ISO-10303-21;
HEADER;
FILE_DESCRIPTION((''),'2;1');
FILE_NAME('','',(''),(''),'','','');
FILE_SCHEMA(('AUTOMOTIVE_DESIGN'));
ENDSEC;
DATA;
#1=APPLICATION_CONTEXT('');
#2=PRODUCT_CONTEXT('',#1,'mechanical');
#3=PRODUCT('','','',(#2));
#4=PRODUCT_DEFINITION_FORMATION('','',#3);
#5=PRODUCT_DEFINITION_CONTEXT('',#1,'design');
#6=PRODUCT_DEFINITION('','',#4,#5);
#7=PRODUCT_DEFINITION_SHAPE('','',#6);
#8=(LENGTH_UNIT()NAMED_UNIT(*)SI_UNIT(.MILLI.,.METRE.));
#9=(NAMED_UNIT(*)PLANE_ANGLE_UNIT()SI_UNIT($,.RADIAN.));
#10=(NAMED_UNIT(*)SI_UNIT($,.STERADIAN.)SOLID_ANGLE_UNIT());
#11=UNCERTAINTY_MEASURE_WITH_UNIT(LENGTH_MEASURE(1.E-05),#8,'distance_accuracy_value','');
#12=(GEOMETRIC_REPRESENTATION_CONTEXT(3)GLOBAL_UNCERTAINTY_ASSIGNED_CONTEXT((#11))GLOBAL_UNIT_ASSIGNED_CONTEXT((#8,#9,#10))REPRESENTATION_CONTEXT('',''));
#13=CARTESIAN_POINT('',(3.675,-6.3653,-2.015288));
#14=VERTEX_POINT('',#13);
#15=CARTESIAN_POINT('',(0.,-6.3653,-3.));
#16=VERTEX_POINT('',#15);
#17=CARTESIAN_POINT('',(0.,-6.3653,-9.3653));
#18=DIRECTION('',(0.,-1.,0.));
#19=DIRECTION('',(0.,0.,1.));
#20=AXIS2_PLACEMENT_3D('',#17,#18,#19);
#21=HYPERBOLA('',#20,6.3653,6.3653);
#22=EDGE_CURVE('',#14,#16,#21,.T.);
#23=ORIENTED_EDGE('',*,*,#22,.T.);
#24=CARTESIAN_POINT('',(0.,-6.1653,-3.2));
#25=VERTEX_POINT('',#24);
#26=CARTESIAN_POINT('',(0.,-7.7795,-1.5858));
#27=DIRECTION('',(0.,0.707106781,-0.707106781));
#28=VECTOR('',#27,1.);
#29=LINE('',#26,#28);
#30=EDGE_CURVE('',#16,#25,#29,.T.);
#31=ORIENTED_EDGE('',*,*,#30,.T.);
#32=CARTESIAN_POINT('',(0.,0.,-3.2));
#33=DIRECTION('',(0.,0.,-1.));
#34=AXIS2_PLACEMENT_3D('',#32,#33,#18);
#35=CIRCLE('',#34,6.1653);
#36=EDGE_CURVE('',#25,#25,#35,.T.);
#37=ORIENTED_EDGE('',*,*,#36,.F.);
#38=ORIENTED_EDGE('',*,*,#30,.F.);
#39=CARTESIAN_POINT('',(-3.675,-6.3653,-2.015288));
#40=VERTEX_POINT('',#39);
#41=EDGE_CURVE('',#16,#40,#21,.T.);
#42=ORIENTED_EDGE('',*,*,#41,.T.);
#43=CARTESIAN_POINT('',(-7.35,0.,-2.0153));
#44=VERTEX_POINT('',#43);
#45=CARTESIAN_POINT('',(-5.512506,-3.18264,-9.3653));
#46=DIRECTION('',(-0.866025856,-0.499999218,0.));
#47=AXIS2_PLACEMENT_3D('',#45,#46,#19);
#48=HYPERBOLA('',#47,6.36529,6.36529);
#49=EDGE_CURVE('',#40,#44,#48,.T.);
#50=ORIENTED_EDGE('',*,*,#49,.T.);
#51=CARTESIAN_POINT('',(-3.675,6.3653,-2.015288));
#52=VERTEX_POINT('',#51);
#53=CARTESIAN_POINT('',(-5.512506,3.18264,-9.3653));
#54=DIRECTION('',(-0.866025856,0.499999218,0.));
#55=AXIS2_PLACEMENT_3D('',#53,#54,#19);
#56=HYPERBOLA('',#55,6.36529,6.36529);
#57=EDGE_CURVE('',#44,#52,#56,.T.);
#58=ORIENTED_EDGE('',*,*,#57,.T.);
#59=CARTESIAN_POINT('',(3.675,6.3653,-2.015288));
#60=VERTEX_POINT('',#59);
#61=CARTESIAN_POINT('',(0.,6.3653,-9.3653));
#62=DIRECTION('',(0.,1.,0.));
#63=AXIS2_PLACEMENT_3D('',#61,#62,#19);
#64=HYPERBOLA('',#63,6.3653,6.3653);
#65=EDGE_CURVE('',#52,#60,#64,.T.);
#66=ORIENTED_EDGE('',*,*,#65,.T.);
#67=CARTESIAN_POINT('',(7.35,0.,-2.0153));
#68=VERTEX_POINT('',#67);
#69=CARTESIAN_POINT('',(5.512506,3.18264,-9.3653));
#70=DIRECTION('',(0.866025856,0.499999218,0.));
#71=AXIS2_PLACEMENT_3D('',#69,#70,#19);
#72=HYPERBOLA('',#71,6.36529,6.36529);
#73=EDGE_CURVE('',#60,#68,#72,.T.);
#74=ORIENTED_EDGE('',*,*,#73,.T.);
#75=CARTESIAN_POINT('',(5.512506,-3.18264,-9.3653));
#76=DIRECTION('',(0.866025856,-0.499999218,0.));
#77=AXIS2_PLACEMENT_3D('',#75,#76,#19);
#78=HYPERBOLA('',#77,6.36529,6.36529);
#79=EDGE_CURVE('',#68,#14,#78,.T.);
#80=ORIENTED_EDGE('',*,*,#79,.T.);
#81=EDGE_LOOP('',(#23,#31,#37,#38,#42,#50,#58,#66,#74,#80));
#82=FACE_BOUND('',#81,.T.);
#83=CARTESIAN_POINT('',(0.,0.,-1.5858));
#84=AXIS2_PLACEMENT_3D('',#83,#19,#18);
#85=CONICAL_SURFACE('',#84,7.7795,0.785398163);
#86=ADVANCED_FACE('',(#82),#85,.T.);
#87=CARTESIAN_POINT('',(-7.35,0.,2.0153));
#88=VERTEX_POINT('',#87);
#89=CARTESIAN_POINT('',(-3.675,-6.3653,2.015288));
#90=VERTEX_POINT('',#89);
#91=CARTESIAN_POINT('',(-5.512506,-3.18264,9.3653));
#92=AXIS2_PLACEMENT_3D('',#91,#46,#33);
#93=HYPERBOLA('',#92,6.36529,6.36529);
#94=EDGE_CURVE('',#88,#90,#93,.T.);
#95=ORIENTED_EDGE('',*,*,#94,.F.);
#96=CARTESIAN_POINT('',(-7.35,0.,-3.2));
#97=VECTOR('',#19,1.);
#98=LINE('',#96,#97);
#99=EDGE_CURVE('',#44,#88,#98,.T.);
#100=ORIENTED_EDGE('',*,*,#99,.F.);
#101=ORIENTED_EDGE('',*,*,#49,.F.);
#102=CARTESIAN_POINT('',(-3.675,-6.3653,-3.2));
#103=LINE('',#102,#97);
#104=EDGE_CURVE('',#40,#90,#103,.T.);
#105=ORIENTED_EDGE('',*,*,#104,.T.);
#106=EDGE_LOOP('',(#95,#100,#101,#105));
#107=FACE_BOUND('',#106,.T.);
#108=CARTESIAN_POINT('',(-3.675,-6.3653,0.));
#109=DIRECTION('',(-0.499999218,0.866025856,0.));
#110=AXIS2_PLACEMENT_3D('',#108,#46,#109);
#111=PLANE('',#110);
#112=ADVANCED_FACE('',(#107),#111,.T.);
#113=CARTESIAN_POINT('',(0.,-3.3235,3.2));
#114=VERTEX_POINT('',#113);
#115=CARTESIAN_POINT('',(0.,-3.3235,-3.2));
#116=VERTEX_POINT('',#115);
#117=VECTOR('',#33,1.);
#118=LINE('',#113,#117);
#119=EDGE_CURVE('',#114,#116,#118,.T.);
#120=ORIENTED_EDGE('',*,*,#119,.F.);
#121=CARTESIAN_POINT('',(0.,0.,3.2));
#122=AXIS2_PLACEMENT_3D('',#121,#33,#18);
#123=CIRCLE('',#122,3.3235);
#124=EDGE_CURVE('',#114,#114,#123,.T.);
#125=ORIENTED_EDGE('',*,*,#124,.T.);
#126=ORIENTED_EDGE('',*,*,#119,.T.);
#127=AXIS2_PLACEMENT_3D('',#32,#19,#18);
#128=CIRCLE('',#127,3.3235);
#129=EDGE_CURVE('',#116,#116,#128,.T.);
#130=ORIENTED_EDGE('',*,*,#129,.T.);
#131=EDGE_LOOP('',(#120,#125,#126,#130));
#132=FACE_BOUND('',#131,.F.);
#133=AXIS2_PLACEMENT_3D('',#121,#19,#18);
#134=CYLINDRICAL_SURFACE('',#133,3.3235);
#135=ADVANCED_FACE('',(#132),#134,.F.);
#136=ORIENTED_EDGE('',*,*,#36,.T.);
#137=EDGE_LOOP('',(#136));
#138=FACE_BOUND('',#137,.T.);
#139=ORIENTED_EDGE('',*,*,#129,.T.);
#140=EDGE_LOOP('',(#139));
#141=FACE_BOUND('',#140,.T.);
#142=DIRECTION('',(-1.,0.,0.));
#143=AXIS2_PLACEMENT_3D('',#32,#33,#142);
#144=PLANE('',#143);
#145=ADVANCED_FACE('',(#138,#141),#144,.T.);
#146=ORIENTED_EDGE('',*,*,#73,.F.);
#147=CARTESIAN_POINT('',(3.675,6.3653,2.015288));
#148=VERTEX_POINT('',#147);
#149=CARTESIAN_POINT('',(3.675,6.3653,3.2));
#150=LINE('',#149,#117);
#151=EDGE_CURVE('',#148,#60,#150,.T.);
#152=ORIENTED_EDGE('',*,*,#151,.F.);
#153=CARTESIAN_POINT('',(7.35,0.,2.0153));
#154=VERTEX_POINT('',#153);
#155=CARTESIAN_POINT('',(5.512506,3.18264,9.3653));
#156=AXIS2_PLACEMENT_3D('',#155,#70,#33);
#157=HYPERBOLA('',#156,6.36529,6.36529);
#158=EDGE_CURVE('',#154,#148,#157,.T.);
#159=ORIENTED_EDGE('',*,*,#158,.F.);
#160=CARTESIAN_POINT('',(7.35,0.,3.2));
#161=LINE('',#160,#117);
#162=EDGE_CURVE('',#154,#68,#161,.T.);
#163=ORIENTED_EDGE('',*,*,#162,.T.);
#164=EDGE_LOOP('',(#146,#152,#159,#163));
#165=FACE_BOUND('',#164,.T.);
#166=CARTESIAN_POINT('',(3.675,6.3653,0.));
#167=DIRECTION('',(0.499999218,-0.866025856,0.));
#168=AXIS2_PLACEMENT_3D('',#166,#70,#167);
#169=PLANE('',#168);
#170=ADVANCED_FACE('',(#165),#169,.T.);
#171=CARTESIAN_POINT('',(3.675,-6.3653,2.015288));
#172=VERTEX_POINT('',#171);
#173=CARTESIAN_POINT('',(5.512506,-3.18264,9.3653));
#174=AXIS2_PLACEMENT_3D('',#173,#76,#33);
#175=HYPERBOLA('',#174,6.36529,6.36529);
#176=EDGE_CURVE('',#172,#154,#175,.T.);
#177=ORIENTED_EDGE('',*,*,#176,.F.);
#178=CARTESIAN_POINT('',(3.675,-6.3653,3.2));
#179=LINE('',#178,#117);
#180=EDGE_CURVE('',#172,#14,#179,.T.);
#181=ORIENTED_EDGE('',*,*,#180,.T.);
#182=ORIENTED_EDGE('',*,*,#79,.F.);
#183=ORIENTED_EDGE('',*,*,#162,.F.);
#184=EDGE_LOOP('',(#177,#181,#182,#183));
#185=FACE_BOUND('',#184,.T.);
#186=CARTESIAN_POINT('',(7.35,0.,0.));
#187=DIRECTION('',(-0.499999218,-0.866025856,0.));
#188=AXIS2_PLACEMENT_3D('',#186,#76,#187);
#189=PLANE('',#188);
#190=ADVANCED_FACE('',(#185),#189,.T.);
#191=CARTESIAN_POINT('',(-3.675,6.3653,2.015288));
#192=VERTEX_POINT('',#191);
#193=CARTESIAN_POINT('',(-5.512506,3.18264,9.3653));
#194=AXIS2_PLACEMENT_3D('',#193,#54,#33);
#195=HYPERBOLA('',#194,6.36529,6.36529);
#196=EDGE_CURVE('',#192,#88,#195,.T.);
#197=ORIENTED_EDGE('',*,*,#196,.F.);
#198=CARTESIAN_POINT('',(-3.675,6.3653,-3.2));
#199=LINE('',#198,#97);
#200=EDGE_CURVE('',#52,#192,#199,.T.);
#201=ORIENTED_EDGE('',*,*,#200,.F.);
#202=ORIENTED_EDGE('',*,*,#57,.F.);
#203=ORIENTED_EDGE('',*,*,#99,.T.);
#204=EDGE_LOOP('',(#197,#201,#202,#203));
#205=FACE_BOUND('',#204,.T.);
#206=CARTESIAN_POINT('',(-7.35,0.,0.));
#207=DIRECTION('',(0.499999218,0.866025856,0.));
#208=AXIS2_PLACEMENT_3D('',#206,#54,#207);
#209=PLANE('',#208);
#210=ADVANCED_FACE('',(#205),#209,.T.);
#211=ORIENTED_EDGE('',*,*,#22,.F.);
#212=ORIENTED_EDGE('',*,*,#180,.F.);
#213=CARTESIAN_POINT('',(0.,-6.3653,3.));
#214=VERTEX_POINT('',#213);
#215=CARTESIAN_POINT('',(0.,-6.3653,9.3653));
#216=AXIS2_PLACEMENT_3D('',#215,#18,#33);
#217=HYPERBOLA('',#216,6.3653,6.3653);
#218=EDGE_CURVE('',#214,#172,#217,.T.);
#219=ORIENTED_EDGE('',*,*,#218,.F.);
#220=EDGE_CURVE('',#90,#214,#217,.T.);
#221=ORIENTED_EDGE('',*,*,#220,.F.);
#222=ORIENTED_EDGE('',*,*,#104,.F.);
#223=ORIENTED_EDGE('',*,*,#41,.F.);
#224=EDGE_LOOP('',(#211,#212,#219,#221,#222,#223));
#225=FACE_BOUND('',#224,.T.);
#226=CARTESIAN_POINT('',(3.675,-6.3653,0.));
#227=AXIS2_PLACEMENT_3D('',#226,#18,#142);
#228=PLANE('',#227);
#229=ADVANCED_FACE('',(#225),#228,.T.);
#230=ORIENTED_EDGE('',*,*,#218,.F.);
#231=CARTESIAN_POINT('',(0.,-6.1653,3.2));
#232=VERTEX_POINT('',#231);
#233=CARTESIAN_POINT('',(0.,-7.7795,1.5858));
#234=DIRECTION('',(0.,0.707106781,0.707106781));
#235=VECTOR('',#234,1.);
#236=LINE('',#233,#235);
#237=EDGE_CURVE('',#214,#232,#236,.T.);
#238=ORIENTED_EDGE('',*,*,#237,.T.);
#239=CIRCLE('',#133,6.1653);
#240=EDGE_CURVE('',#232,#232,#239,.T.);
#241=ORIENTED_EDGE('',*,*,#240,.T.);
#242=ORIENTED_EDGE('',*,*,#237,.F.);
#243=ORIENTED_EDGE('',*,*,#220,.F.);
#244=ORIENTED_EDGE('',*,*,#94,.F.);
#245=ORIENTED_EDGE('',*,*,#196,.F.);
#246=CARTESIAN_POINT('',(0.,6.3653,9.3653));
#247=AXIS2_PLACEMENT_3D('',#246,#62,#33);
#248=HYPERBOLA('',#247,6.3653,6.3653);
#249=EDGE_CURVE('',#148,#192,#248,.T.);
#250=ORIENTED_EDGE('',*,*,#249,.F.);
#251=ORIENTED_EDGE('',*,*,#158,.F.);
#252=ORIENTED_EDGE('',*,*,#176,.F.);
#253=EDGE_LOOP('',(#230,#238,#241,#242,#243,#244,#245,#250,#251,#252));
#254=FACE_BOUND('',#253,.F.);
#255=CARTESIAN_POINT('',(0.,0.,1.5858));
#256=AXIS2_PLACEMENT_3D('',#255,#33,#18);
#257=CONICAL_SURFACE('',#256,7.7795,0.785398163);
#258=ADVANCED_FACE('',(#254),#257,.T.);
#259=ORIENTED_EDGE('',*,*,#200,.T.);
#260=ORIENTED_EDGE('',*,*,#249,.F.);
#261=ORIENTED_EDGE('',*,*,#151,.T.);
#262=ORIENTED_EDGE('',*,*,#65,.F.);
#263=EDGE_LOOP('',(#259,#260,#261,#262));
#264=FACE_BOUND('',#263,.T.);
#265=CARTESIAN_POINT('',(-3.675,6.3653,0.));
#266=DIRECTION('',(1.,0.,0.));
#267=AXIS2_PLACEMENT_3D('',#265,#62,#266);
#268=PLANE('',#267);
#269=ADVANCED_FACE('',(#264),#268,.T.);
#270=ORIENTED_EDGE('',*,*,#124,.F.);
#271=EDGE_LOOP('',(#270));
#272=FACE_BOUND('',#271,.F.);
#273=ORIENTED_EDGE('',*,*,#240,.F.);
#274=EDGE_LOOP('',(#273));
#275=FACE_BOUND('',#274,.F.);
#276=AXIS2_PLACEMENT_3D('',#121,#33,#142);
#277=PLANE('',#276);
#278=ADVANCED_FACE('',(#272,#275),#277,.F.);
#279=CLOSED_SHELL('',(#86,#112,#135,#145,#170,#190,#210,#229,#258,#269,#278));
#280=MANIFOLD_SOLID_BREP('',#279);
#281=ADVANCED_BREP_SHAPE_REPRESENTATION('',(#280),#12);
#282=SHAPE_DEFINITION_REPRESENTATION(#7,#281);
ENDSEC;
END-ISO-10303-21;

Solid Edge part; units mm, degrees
sketch "Sketch1" plane through (0, 0, 0) normal (0, 0, 1) x (1, 0, 0)
  line L0 (-3.675, 6.3653) -> (3.675, 6.3653)
  line L1 (3.675, 6.3653) -> (7.35, 0)
  line L2 (7.35, 0) -> (3.675, -6.3653)
  line L3 (3.675, -6.3653) -> (-3.675, -6.3653)
  line L4 (-3.675, -6.3653) -> (-7.35, 0)
  line L5 (-7.35, 0) -> (-3.675, 6.3653)
extrude "Protrusion1" add sketch "Sketch1" along normal mid plane 6.4
sketch "Sketch2" plane through (0, -5.5125, 6.3) normal (-1, 0, 0) x (0, 1, 0)
  line L0 (-2.267, 7.8858) -> (0.5614, 10.7142)
  line L1 (-2.267, 7.8858) -> (-2.267, 4.7142)
  line L2 (-2.267, 4.7142) -> (0.5614, 1.8858)
revolve "RevolvedCutout1" cut sketch "Sketch2" angle 360 about axis through (0, 0, 0.5943) along (0, 0, -1) material side at (0, -6.4007, -3.0354)
hole "Hole_1" at (0, 0, 3.2) direction (0, 0, -1) diameter 6.647 end up to next
properties material "Stainless steel"
